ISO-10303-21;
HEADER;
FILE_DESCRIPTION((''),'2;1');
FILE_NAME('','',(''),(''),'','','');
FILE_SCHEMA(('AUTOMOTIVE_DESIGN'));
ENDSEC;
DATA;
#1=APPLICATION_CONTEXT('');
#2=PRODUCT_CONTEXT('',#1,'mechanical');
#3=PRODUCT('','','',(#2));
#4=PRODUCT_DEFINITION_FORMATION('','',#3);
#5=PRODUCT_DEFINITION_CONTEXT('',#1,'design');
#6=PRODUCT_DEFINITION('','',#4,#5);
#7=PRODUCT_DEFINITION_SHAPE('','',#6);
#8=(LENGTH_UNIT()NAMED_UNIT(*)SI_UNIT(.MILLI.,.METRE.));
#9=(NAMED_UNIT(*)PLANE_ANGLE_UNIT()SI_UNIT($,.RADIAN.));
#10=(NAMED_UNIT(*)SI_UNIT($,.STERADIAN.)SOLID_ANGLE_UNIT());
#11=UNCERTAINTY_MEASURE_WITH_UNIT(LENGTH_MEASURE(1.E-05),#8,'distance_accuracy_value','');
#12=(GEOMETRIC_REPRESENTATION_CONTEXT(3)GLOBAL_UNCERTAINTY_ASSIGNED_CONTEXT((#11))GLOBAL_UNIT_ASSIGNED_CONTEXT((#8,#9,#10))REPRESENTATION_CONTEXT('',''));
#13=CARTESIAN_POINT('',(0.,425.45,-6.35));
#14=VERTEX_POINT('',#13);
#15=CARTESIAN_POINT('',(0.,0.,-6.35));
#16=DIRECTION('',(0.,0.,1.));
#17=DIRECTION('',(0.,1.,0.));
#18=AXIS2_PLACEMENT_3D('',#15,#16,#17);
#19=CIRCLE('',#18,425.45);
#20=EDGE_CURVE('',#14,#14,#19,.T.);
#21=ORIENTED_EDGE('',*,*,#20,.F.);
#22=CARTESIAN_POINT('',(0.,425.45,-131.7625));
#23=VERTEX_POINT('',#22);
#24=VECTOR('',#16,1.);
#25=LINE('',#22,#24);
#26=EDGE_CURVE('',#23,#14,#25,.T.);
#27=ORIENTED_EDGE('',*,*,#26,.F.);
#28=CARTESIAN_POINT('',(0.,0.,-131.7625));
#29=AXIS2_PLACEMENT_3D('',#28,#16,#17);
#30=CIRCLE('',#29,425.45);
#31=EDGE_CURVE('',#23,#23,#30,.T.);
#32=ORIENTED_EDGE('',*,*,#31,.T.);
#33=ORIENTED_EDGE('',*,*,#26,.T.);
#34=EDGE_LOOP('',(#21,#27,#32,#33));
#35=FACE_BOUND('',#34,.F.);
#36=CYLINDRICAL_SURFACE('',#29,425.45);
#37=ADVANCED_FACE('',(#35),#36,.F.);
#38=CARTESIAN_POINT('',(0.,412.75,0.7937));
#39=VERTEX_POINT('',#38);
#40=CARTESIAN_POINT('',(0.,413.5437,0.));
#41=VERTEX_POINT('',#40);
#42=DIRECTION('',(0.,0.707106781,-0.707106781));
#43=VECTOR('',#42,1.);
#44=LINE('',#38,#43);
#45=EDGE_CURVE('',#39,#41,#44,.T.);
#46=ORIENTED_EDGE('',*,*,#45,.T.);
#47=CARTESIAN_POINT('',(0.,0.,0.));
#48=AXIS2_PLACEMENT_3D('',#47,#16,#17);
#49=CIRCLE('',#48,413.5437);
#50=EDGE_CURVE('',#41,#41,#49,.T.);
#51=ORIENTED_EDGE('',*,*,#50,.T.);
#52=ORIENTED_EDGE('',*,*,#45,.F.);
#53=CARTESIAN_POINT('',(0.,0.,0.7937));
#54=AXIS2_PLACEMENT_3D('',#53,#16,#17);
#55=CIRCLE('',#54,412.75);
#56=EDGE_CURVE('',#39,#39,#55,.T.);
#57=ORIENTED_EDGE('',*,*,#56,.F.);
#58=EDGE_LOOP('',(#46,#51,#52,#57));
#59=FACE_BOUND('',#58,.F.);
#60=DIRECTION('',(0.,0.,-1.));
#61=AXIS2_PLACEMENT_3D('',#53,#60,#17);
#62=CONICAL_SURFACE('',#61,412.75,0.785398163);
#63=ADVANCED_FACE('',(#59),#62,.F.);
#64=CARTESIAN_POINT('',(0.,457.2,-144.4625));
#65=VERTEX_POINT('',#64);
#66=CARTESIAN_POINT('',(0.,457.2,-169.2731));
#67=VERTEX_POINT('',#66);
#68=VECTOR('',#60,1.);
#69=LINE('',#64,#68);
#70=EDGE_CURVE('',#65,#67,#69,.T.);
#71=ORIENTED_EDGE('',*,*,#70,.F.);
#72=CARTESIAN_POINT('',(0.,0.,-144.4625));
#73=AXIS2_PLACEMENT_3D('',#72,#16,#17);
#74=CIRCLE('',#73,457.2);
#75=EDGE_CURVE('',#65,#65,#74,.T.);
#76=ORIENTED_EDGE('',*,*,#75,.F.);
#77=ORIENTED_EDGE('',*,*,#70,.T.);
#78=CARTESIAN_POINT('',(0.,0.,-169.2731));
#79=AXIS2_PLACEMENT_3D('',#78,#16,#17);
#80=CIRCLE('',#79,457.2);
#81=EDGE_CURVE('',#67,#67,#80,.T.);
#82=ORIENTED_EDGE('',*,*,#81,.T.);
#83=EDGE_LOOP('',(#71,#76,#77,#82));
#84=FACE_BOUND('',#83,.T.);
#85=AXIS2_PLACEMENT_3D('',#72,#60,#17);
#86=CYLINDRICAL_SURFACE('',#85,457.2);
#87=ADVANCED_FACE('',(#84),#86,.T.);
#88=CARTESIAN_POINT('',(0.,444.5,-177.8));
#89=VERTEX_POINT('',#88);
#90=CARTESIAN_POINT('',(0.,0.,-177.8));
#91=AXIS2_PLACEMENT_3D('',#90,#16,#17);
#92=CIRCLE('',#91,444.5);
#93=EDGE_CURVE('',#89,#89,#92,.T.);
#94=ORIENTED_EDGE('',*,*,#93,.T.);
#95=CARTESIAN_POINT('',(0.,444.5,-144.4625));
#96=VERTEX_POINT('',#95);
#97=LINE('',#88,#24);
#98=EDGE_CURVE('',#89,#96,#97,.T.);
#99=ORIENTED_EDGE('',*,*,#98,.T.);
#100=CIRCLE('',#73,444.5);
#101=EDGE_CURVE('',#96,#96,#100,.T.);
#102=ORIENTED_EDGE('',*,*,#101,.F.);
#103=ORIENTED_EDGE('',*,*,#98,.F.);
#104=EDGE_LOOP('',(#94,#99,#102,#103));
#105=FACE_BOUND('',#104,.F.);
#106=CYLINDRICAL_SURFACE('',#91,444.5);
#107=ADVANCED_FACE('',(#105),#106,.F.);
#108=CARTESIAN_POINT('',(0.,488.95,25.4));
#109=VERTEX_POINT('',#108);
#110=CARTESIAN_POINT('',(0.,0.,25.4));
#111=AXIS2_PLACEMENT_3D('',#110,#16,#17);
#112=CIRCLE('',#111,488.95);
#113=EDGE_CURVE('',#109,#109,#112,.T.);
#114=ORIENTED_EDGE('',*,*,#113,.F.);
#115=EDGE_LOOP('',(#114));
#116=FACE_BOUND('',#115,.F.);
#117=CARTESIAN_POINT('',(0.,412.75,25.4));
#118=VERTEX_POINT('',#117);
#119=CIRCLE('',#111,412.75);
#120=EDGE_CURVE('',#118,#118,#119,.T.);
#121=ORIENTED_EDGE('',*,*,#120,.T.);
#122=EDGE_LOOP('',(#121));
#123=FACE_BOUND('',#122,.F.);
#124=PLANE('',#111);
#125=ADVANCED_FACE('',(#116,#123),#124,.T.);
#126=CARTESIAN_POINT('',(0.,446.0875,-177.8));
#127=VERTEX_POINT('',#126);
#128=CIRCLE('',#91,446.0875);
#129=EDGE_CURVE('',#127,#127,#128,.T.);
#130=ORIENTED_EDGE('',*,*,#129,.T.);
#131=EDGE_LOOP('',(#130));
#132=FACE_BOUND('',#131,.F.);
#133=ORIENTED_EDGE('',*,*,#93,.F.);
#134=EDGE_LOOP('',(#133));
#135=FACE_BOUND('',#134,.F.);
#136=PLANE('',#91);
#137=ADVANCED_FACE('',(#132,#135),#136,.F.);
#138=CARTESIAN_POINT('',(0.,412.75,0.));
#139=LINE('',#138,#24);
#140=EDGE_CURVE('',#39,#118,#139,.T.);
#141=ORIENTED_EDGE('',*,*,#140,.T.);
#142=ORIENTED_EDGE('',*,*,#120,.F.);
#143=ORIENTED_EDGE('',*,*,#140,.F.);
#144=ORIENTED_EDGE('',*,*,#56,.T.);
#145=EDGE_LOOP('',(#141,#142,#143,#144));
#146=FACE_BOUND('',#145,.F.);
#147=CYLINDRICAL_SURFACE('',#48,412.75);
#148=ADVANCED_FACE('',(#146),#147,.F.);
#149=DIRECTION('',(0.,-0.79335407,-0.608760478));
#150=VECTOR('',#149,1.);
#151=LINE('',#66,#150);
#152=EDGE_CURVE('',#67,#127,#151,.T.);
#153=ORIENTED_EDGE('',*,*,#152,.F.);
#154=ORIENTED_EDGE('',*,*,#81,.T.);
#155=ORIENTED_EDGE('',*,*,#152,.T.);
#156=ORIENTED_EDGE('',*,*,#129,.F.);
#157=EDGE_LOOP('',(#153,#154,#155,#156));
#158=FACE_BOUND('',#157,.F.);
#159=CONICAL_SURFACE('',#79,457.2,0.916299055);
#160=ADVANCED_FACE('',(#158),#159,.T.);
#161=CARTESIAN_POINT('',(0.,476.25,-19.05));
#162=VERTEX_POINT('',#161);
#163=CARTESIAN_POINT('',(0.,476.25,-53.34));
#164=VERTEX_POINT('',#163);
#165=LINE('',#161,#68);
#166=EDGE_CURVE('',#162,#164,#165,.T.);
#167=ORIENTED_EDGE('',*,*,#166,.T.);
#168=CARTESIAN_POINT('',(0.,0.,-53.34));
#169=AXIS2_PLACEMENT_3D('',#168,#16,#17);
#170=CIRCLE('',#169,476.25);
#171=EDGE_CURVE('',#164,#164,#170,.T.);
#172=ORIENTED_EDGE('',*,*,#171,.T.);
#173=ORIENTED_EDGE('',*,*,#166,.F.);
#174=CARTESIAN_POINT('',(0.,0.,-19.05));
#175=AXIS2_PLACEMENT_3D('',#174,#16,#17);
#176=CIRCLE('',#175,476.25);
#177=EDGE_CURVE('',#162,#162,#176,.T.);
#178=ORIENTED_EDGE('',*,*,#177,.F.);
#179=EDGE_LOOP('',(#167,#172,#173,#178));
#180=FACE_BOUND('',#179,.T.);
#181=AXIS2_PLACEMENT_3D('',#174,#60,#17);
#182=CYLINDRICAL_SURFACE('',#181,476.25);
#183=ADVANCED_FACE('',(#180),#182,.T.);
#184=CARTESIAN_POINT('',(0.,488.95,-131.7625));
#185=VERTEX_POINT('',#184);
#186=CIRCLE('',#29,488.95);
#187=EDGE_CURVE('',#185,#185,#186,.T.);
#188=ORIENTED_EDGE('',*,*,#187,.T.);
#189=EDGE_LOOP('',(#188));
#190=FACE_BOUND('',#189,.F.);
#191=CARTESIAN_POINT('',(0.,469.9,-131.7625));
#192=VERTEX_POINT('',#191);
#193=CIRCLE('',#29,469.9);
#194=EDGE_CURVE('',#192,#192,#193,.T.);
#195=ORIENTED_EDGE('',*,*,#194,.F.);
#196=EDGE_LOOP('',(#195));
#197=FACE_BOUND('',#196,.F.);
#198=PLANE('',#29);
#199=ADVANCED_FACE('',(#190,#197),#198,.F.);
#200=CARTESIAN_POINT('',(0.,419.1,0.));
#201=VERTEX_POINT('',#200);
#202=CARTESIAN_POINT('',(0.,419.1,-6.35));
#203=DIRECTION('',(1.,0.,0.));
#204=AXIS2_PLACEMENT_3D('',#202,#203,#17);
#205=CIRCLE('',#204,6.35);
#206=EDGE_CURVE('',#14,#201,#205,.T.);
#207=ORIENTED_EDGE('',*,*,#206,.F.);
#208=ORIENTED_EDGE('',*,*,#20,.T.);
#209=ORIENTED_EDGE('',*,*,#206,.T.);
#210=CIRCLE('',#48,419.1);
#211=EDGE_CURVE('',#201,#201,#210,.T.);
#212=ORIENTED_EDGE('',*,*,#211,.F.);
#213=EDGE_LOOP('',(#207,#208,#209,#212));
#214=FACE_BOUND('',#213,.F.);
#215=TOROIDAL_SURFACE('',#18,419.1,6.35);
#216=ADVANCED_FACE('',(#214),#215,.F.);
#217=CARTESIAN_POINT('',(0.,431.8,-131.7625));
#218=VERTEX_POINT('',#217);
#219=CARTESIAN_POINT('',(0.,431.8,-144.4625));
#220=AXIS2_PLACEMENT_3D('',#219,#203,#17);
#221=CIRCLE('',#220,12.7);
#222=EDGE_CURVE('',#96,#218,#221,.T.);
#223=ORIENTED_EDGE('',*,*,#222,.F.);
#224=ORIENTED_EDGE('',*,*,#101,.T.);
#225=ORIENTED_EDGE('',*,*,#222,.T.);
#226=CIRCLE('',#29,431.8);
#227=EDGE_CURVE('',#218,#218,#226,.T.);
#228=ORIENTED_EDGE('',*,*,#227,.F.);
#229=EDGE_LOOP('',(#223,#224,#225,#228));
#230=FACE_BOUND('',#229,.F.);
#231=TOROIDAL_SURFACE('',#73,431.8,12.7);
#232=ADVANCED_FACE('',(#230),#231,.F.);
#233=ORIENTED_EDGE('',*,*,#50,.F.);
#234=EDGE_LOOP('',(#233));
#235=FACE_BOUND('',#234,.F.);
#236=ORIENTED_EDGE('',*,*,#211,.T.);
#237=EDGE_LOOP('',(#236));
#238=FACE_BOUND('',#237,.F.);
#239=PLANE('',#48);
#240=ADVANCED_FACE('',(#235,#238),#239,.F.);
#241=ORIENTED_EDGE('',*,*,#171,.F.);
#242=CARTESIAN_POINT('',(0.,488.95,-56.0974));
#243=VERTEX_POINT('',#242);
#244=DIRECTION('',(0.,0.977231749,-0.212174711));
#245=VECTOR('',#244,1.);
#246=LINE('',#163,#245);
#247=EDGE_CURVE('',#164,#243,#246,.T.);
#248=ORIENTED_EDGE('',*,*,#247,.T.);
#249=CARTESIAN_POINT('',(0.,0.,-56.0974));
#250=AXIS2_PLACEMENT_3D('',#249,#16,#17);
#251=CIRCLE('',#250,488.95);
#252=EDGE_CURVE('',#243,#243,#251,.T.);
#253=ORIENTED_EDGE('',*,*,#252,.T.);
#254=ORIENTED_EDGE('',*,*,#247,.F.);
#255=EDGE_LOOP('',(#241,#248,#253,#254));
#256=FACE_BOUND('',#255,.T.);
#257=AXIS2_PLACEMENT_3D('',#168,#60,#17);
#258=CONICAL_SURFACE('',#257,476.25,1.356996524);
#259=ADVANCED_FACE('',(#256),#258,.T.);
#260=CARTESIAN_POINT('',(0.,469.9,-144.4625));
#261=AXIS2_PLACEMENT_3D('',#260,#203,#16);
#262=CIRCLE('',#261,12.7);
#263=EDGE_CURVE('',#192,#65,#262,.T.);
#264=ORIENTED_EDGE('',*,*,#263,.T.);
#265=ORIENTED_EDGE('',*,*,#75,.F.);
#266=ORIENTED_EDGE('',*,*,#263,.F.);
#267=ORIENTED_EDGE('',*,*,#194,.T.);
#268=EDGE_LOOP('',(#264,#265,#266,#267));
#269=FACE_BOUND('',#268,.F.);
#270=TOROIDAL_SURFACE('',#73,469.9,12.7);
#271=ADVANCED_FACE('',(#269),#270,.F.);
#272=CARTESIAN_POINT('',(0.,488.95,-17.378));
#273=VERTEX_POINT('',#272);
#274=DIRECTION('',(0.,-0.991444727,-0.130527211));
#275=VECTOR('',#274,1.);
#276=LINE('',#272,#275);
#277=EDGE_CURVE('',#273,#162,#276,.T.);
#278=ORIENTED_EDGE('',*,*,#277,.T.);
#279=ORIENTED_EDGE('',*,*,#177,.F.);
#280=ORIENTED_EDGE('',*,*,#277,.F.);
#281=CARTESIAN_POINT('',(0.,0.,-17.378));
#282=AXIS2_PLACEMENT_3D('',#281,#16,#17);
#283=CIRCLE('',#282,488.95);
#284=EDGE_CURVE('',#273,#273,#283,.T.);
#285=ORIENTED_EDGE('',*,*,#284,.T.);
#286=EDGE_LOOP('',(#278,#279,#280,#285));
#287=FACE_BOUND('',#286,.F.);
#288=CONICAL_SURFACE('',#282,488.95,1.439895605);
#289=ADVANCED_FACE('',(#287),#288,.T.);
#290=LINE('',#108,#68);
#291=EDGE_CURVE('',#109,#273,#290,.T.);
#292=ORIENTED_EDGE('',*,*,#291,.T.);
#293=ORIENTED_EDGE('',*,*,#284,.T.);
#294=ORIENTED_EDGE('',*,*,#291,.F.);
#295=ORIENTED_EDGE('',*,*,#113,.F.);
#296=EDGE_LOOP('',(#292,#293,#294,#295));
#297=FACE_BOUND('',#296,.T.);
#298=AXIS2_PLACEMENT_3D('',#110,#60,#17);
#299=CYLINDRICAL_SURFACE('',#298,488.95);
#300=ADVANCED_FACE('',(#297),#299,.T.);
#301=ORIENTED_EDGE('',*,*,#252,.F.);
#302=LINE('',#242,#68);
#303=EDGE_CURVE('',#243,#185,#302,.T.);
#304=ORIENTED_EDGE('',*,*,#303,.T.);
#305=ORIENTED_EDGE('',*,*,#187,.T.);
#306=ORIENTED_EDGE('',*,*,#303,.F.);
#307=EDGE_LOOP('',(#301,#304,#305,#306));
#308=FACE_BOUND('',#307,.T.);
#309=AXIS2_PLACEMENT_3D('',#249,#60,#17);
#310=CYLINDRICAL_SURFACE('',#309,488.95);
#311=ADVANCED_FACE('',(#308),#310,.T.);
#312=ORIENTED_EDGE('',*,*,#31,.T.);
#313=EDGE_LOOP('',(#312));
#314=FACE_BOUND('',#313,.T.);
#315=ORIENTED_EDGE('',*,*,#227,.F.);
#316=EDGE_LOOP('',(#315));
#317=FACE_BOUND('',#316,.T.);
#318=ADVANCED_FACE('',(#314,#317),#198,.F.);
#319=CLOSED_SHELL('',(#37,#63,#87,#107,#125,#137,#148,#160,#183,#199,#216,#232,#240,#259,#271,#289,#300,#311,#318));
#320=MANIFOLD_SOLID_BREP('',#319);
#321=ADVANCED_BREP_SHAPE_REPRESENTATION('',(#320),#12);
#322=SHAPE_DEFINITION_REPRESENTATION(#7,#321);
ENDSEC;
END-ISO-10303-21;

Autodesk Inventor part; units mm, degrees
ref_plane "YZ Plane" through (0, 0, 0) normal (1, 0, 0) x (0, 1, 0)
ref_plane "XZ Plane" through (0, 0, 0) normal (0, 1, 0) x (-1, 0, 0)
ref_plane "XY Plane" through (0, 0, 0) normal (0, 0, 1) x (1, 0, 0)
sketch "Sketch1" plane through (0, 0, 0) normal (1, 0, 0) x (0, 1, 0)
  line L0 (412.75, 0) -> (412.75, 25.4)
  line L1 (412.75, 25.4) -> (488.95, 25.4)
  line L2 (488.95, 25.4) -> (488.95, -17.378)
  line L3 (488.95, -17.378) -> (476.25, -19.05)
  line L4 (476.25, -19.05) -> (476.25, -53.34)
  line L5 (476.25, -53.34) -> (488.95, -56.0974)
  line L6 (488.95, -56.0974) -> (488.95, -131.7625)
  line L7 (0, -218.44) -> (0, 66.04) projected
  line L8 (457.2, -144.4625) -> (457.2, -169.2731)
  line L9 (457.2, -169.2731) -> (446.0875, -177.8)
  line L10 (446.0875, -177.8) -> (444.5, -177.8)
  line L11 (444.5, -177.8) -> (444.5, -144.4625)
  arc A0 (425.45, -6.35) -> (419.1, 0) centre (419.1, -6.35) ccw
  line L12 (419.1, 0) -> (412.75, 0)
  arc A1 (469.9, -131.7625) -> (457.2, -144.4625) centre (469.9, -144.4625) ccw
  line L13 (425.45, -131.7625) -> (431.8, -131.7625)
  arc A2 (444.5, -144.4625) -> (431.8, -131.7625) centre (431.8, -144.4625) ccw
  line L14 (425.45, -131.7625) -> (425.45, -6.35)
  line L15 (488.95, -131.7625) -> (469.9, -131.7625)
  point P0 (0, 0)
  dimension "d0" = 412.75
  dimension "d5" = 25.4
  dimension "d13" = 476.25
  dimension "d14" = 488.95
  dimension "d16" = 44.45
  dimension "d17" = 34.29
  dimension "d18" = 7.5
  dimension "d19" = 12.25
  dimension "d32" = 457.2
  dimension "d33" = 11.1125
  dimension "d35" = 1.5875
  dimension "d36" = 6.35
  dimension "d38" = 203.2
  dimension "d44" = 12.7
  dimension "d46" = 37.5
  dimension "d47" = 12.7
  dimension "d48" = 425.45
  dimension "d49" = 157.1625
revolve "Revolution1" add sketch "Sketch1" angle 360 about axis through (0, 0, -10) along (0, 0, 1)
chamfer "Chamfer2" distance 0.7937 angle 45 1 edges at (0, -412.75, 0)
equation "\"d47\" = d44"
properties part number "A1-19027-100-03 36in Type B victaulic ring" material "Steel, Mild"
